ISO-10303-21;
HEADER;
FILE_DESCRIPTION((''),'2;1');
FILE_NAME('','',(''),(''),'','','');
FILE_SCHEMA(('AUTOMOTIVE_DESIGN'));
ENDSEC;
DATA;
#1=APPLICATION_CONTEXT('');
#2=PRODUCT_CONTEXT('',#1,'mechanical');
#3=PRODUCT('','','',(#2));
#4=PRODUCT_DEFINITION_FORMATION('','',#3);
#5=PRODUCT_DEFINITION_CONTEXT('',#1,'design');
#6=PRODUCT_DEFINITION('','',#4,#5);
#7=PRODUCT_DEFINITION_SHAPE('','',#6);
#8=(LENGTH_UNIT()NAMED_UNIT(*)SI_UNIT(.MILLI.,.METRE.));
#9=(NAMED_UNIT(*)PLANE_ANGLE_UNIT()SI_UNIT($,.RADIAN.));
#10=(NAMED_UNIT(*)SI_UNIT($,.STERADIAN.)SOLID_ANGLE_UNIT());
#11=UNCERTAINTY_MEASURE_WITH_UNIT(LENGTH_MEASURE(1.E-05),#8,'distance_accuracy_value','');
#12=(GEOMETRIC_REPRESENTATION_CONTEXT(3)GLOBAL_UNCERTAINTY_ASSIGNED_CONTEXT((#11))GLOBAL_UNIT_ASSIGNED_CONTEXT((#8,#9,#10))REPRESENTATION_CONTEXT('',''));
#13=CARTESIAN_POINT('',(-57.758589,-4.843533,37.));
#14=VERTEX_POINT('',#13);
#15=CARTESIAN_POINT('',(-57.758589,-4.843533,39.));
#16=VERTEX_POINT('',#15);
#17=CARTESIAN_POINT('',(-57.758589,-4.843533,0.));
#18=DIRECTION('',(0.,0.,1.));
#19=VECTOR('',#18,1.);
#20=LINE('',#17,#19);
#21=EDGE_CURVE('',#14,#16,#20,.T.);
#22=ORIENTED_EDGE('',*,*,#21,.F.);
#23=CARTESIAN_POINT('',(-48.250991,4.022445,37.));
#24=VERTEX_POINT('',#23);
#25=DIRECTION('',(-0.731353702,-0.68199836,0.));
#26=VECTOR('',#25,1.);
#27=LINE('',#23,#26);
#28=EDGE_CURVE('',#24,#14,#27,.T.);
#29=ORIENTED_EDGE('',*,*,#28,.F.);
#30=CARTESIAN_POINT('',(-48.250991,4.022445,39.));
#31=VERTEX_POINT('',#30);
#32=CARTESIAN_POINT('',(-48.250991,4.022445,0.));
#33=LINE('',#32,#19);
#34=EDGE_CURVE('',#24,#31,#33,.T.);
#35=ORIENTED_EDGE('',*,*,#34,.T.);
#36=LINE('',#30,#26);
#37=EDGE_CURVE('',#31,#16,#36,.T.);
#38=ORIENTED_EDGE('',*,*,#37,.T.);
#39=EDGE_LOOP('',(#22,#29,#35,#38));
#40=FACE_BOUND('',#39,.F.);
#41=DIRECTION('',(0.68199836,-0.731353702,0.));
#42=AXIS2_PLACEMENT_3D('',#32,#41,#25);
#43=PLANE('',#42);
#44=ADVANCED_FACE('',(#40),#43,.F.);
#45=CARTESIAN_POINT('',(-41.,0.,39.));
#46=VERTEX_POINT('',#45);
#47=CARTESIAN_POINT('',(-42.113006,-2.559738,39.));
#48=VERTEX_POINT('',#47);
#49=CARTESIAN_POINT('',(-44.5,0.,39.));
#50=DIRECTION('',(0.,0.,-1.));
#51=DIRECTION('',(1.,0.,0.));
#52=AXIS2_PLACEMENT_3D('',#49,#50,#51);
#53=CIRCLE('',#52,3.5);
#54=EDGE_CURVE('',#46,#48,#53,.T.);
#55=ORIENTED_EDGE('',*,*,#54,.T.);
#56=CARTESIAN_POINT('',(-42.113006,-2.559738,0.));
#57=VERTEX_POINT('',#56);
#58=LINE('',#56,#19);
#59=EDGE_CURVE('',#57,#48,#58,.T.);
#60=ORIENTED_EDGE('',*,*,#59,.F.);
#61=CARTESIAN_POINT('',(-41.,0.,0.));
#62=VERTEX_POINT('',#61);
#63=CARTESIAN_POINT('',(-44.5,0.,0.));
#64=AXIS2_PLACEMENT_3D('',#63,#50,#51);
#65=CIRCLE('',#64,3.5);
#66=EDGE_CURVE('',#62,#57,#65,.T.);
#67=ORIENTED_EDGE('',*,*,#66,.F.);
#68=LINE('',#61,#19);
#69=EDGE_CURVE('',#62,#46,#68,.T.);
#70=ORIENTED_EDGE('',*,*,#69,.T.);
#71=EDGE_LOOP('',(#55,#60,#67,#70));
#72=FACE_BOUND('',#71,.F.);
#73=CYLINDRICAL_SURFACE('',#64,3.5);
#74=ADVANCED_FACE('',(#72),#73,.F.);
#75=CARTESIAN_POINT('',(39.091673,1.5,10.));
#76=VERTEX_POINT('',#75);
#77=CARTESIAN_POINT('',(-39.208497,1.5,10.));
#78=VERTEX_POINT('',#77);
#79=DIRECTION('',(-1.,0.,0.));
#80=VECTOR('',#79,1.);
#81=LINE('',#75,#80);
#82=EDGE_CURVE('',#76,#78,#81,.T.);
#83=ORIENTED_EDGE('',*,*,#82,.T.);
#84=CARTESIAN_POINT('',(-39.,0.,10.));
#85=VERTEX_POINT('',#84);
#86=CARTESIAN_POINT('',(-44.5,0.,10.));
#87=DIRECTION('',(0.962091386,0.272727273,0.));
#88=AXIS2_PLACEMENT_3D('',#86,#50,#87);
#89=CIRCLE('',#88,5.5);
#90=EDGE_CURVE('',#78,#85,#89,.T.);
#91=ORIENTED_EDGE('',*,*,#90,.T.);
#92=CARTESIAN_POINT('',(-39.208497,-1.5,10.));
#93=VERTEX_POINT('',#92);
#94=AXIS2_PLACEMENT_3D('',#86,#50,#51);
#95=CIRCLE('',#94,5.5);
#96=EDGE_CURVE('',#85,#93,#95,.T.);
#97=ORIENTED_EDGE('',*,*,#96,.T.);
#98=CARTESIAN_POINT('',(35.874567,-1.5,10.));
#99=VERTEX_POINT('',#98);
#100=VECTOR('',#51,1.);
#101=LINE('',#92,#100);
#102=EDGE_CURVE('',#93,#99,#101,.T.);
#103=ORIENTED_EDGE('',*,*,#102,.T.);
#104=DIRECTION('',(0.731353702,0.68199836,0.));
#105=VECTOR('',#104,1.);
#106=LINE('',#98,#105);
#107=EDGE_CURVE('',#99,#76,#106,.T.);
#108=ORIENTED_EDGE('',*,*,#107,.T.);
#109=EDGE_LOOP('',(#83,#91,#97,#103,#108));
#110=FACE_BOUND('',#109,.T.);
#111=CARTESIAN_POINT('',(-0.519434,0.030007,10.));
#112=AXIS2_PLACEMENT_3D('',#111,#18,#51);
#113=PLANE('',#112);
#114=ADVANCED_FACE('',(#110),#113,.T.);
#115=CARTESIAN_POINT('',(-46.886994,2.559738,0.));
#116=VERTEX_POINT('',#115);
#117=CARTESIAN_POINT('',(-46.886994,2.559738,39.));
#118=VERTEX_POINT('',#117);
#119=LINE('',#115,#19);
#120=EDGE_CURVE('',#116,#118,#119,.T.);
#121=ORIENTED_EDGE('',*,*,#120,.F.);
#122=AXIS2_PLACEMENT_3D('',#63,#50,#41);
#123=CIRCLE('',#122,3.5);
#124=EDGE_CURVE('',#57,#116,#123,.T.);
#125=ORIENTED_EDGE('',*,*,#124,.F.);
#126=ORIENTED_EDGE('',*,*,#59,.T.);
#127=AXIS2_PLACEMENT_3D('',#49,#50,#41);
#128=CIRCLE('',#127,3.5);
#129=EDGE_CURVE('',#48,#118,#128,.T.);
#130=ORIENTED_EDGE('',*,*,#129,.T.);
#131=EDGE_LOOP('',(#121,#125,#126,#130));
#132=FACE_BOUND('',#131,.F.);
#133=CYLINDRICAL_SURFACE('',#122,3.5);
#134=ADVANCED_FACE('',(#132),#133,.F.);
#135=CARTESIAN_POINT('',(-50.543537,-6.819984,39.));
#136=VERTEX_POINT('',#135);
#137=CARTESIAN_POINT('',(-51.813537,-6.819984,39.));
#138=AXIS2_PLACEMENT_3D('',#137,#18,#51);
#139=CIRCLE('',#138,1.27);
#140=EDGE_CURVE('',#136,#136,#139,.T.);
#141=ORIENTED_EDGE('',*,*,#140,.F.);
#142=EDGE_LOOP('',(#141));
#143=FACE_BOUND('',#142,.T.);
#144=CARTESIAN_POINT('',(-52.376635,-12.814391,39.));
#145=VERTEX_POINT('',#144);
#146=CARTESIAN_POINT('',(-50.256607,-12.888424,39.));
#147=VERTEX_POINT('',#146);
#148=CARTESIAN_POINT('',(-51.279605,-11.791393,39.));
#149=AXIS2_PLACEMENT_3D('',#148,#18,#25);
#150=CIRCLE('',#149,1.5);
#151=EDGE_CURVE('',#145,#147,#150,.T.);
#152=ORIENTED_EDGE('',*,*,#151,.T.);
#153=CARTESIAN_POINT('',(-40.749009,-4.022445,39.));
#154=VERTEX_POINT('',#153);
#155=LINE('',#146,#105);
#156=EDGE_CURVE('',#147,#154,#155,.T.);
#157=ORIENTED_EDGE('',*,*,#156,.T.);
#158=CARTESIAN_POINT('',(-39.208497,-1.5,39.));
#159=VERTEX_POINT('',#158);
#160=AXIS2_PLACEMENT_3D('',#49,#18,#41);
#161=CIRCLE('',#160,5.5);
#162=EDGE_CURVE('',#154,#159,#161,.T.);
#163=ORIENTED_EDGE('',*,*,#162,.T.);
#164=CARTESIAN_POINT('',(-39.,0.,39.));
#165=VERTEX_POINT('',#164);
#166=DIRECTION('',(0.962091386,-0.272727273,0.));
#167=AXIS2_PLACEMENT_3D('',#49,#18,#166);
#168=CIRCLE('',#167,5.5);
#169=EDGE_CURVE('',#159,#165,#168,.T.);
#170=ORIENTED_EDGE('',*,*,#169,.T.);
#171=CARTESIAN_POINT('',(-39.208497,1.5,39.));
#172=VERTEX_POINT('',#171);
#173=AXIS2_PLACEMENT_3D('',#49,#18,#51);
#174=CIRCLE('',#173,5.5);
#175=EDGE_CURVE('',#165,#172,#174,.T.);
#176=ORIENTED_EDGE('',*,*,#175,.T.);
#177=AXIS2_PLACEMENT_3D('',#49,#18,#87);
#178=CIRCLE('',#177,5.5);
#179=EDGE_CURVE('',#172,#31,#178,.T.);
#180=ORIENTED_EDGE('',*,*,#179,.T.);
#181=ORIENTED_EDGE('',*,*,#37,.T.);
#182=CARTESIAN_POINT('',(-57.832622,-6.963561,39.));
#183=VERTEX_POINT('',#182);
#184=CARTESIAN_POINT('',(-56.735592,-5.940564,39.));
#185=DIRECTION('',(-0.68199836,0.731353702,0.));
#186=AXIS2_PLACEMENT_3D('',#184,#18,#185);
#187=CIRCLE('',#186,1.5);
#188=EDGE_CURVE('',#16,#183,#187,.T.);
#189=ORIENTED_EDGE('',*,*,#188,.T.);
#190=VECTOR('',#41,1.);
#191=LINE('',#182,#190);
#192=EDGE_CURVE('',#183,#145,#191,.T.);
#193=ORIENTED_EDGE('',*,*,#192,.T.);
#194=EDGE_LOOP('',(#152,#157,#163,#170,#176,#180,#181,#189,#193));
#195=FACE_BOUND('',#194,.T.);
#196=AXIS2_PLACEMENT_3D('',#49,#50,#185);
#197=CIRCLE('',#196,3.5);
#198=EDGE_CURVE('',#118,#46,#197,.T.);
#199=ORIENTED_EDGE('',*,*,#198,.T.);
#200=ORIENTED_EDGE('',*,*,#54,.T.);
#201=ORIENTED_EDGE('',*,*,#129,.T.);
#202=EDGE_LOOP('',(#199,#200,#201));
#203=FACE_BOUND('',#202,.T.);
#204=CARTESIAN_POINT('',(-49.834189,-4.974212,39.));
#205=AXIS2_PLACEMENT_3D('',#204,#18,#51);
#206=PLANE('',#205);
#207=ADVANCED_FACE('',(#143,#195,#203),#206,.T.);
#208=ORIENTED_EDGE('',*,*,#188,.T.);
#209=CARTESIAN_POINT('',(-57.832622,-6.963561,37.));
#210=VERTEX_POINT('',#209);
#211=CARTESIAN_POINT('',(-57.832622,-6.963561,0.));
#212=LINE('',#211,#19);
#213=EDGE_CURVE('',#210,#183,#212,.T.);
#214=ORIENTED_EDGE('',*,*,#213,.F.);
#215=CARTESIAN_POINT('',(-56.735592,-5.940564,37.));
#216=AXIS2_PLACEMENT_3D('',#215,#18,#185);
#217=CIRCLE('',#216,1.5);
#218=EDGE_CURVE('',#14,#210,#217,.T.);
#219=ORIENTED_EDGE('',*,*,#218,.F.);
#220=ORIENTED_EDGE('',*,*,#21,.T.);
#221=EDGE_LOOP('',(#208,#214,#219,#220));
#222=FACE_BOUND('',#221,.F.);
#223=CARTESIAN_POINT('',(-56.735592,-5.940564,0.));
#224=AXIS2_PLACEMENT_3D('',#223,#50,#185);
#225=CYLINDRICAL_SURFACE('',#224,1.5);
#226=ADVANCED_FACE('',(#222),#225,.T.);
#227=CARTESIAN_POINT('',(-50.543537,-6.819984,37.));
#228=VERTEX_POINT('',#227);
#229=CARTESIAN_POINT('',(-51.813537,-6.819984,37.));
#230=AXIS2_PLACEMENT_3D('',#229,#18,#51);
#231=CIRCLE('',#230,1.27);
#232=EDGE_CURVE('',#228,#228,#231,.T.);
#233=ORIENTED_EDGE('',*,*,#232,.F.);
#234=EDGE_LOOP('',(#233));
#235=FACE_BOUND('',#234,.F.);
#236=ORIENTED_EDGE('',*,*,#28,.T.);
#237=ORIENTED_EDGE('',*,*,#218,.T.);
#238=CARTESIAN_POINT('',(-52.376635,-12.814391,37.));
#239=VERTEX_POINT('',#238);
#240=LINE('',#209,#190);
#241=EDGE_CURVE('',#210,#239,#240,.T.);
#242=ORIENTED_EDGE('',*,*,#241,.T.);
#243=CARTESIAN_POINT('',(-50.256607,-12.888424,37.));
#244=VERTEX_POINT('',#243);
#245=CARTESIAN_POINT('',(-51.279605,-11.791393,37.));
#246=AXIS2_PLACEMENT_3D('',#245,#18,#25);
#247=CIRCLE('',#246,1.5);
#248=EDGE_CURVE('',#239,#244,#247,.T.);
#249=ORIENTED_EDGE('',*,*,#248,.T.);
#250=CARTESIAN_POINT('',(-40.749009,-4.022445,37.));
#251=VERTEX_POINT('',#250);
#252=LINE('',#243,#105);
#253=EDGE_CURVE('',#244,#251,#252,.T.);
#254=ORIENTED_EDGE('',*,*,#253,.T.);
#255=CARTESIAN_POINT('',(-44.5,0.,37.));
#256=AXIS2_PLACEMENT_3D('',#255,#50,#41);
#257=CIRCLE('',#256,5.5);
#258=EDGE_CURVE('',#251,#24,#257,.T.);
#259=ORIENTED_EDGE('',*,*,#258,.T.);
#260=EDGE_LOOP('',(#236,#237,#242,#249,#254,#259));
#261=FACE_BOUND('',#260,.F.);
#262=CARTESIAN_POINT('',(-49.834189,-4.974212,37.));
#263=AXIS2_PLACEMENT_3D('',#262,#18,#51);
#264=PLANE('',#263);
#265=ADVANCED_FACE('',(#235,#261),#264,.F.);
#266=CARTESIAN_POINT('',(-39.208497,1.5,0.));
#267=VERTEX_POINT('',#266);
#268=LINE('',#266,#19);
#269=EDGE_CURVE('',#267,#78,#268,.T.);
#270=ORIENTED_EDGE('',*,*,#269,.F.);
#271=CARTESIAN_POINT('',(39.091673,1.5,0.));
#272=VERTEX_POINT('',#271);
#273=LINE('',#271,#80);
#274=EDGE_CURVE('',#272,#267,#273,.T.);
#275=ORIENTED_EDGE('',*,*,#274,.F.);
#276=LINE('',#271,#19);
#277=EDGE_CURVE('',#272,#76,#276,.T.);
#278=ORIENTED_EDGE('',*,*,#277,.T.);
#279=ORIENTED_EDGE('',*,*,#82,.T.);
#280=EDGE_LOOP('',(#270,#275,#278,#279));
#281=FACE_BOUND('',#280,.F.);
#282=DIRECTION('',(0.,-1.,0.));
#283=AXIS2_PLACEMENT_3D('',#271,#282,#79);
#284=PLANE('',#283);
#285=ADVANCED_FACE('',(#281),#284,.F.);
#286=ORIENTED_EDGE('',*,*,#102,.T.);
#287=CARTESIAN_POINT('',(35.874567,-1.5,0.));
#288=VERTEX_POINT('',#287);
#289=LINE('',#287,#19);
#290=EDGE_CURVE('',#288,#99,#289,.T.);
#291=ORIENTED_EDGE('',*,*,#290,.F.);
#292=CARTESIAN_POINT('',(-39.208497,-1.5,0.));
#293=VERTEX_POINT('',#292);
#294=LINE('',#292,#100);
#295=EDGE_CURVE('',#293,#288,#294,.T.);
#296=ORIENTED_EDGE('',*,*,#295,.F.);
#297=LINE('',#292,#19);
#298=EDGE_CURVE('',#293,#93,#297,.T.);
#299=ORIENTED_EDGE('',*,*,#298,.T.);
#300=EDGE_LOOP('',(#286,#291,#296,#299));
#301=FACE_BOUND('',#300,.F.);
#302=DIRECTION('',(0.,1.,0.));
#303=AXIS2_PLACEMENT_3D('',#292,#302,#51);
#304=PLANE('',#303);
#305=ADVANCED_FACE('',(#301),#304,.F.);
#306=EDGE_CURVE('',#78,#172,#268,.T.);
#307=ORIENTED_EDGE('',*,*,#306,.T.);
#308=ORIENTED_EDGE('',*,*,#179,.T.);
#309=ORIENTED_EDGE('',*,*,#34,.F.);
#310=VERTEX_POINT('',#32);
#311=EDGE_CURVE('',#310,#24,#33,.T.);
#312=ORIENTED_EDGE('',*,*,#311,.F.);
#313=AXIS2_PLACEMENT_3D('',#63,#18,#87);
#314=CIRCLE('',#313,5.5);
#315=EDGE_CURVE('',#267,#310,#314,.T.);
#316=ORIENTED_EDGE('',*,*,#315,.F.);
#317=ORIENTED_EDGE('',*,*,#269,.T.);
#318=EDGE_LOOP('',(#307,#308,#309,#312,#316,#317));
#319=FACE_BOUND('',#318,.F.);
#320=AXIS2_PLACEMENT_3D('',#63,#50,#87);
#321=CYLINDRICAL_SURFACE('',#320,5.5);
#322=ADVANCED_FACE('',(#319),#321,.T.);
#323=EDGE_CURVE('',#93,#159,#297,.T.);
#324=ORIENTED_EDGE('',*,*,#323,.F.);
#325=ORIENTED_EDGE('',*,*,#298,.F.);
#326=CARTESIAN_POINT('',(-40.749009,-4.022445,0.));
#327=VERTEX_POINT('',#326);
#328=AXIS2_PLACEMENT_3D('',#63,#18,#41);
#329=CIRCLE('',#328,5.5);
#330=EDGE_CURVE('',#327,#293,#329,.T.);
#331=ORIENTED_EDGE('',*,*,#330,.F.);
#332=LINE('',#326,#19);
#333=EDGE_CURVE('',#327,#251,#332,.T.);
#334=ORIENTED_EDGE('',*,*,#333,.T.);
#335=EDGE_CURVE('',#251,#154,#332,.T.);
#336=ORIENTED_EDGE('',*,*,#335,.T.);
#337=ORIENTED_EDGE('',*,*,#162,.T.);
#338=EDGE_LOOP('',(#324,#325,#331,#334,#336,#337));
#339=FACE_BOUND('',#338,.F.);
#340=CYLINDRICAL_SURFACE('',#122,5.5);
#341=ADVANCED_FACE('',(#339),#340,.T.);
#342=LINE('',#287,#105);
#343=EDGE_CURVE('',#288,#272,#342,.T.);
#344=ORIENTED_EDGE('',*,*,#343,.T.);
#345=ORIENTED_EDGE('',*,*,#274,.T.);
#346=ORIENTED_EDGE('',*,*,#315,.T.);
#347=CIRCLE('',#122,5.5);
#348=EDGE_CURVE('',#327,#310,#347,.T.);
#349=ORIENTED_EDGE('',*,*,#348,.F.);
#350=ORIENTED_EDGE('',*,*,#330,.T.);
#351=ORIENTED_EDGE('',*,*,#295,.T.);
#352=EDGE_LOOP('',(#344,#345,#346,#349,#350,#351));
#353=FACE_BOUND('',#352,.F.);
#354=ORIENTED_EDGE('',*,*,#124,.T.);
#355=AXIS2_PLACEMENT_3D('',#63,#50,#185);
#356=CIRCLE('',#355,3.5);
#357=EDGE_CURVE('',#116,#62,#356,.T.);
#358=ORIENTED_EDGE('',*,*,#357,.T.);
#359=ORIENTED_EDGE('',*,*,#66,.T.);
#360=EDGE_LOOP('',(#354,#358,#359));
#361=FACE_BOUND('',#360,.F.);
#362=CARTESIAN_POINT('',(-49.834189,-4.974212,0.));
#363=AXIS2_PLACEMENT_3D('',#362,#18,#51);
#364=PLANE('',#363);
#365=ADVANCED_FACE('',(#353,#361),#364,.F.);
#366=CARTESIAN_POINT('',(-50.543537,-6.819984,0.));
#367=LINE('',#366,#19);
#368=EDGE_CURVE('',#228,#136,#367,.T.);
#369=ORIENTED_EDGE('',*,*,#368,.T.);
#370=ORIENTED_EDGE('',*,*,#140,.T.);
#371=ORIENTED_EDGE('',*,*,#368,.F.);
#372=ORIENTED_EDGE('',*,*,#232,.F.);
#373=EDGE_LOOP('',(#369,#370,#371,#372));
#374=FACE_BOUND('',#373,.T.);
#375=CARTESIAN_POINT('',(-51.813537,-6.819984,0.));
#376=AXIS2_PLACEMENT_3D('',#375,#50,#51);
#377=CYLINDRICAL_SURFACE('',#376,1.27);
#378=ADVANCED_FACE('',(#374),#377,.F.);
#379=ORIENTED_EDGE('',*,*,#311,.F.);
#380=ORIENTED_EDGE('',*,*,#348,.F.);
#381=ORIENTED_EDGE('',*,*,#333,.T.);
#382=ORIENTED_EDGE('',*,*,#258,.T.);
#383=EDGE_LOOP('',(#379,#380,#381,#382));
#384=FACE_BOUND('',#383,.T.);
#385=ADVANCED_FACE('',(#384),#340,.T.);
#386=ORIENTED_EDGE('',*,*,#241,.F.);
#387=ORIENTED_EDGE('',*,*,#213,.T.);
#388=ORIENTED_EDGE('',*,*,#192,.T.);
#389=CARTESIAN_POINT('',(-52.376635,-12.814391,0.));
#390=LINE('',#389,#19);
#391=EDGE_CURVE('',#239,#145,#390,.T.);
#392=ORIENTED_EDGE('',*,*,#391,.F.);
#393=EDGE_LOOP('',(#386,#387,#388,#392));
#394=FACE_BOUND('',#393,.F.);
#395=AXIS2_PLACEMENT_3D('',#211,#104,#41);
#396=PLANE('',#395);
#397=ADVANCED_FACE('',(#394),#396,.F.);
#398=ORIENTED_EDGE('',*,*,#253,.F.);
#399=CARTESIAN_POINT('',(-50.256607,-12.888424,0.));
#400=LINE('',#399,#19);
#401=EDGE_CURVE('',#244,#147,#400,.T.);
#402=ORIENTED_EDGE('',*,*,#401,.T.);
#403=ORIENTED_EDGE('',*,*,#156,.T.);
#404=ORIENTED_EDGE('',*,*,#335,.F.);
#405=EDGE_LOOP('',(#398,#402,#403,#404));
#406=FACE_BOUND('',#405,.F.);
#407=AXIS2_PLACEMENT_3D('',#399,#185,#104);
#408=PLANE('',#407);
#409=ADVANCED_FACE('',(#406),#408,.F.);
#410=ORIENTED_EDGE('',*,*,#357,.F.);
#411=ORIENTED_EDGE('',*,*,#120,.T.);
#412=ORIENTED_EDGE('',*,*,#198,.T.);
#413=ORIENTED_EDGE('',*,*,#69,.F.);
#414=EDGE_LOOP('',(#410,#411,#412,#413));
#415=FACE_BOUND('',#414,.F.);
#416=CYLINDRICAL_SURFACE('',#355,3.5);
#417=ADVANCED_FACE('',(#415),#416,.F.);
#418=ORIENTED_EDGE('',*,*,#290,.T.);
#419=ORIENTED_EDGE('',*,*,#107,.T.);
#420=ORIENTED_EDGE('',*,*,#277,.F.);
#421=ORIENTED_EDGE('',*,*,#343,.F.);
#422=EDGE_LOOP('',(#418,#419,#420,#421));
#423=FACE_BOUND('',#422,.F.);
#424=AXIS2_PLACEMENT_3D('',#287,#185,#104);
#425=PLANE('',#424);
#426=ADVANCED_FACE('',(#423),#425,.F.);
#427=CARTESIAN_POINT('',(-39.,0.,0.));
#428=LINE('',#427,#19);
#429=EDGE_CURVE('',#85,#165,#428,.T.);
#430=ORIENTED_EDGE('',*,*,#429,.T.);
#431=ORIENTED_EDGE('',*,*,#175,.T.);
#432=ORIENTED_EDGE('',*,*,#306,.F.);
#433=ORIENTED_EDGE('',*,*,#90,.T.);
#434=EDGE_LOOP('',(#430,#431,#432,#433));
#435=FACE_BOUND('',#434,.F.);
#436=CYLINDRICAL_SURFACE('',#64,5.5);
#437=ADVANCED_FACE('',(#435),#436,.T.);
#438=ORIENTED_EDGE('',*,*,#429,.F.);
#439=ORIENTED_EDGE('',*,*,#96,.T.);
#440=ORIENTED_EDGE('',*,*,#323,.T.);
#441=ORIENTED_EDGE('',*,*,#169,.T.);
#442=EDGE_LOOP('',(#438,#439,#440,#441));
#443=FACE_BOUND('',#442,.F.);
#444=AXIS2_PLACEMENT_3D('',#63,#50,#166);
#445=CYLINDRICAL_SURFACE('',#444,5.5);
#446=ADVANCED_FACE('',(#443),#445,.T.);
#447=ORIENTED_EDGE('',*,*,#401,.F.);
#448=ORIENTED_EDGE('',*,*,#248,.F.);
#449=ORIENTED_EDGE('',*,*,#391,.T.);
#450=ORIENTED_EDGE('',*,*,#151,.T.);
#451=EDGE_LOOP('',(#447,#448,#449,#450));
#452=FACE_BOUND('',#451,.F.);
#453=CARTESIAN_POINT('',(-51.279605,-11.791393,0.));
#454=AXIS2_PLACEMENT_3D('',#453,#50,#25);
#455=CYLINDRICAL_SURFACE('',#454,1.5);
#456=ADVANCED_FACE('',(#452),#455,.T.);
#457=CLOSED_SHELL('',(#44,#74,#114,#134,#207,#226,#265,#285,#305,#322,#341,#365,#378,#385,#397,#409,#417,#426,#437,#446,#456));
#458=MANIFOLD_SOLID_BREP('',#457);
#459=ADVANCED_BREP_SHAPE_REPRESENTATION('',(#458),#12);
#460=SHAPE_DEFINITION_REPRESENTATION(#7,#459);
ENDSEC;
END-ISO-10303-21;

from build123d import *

# Parameters (mm, degrees)
F1_DEPTH = 10
F2_DEPTH = 39
F3_R     = 1.27
F4_DEPTH = 39
F0_R     = 1.27
F5_DEPTH = 37


# Not quite as in the source:
# - a feature names something its author has since deleted; it is built from what else it names


with BuildPart() as f1:
    # F0 (on Top) → F1 (new body)
    with BuildSketch(Plane.XY):
        with BuildLine():
            Line((39.0916730868, 1.5), (-39.2084973779, 1.5))
            ThreePointArc((-39.2084973779, 1.5), (-39.0523737086, 0.7572105316), (-39, 0))
            ThreePointArc((-39, 0), (-39.0523737086, -0.7572105316), (-39.2084973779, -1.5))
            Line((-39.2084973779, -1.5), (35.8745669567, -1.5))
            Line((35.8745669567, -1.5), (39.0916730868, 1.5))
        make_face()
    extrude(amount=F1_DEPTH)

    # F0 (on Top) → F2 (join)
    with BuildSketch(Plane.XY):
        with BuildLine():
            ThreePointArc((-42.1130057398, -2.5597379557), (-47.0597379557, -2.3869942602), (-46.8869942602, 2.5597379557))
            Line((-46.8869942602, 2.5597379557), (-48.2509909803, 4.0224453589))
            ThreePointArc((-48.2509909803, 4.0224453589), (-48.5224453589, -3.7509909803), (-40.7490090197, -4.0224453589))
            Line((-40.7490090197, -4.0224453589), (-42.1130057398, -2.5597379557))
        make_face()
        with BuildLine():
            ThreePointArc((-46.8869942602, 2.5597379557), (-43.1043782588, 3.2097102603), (-41, 0))
            ThreePointArc((-41, 0), (-41.2902897397, -1.3956217412), (-42.1130057398, -2.5597379557))
            Line((-42.1130057398, -2.5597379557), (-40.7490090197, -4.0224453589))
            ThreePointArc((-40.7490090197, -4.0224453589), (-39.8061364224, -2.866643458), (-39.2084973779, -1.5))
            ThreePointArc((-39.2084973779, -1.5), (-39.0523737086, -0.7572105316), (-39, 0))
            ThreePointArc((-39, 0), (-39.0523737086, 0.7572105316), (-39.2084973779, 1.5))
            ThreePointArc((-39.2084973779, 1.5), (-43.0221716349, 5.2977375665), (-48.2509909803, 4.0224453589))
            Line((-48.2509909803, 4.0224453589), (-46.8869942602, 2.5597379557))
        make_face()
    extrude(amount=F2_DEPTH)

    # F3 (on face) → F4 (join)
    with BuildSketch(Plane.XY):
        with BuildLine():
            Line((-50.2566071407, -12.8884240397), (-40.7490090197, -4.0224453589))
            ThreePointArc((-40.7490090197, -4.0224453589), (-48.5224453589, -3.7509909803), (-48.2509909803, 4.0224453589))
            Line((-48.2509909803, 4.0224453589), (-57.7585891014, -4.8435333219))
            ThreePointArc((-57.7585891014, -4.8435333219), (-58.2346778018, -5.8882146293), (-57.8326221137, -6.9635614144))
            Line((-57.8326221137, -6.9635614144), (-52.3766352332, -12.8143910274))
            ThreePointArc((-52.3766352332, -12.8143910274), (-51.3319539259, -13.2904797278), (-50.2566071407, -12.8884240397))
        make_face()
        with Locations((-51.8135370162, -6.8199836006)):
            Circle(F3_R, mode=Mode.SUBTRACT)
    extrude(amount=F4_DEPTH)

    # F0 (on Top) → F5 (cut)
    with BuildSketch(Plane.XY):
        with BuildLine():
            ThreePointArc((-40.7490090197, -4.0224453589), (-48.5224453589, -3.7509909803), (-48.2509909803, 4.0224453589))
            Line((-48.2509909803, 4.0224453589), (-57.7585891014, -4.8435333219))
            ThreePointArc((-57.7585891014, -4.8435333219), (-58.2346778018, -5.8882146293), (-57.8326221137, -6.9635614144))
            Line((-57.8326221137, -6.9635614144), (-52.3766352332, -12.8143910274))
            ThreePointArc((-52.3766352332, -12.8143910274), (-51.3319539259, -13.2904797278), (-50.2566071407, -12.8884240397))
            Line((-50.2566071407, -12.8884240397), (-40.7490090197, -4.0224453589))
        make_face()
        with Locations((-51.8135370162, -6.8199836006)):
            Circle(F0_R, mode=Mode.SUBTRACT)
    extrude(amount=F5_DEPTH, mode=Mode.SUBTRACT)


solid = f1.part
